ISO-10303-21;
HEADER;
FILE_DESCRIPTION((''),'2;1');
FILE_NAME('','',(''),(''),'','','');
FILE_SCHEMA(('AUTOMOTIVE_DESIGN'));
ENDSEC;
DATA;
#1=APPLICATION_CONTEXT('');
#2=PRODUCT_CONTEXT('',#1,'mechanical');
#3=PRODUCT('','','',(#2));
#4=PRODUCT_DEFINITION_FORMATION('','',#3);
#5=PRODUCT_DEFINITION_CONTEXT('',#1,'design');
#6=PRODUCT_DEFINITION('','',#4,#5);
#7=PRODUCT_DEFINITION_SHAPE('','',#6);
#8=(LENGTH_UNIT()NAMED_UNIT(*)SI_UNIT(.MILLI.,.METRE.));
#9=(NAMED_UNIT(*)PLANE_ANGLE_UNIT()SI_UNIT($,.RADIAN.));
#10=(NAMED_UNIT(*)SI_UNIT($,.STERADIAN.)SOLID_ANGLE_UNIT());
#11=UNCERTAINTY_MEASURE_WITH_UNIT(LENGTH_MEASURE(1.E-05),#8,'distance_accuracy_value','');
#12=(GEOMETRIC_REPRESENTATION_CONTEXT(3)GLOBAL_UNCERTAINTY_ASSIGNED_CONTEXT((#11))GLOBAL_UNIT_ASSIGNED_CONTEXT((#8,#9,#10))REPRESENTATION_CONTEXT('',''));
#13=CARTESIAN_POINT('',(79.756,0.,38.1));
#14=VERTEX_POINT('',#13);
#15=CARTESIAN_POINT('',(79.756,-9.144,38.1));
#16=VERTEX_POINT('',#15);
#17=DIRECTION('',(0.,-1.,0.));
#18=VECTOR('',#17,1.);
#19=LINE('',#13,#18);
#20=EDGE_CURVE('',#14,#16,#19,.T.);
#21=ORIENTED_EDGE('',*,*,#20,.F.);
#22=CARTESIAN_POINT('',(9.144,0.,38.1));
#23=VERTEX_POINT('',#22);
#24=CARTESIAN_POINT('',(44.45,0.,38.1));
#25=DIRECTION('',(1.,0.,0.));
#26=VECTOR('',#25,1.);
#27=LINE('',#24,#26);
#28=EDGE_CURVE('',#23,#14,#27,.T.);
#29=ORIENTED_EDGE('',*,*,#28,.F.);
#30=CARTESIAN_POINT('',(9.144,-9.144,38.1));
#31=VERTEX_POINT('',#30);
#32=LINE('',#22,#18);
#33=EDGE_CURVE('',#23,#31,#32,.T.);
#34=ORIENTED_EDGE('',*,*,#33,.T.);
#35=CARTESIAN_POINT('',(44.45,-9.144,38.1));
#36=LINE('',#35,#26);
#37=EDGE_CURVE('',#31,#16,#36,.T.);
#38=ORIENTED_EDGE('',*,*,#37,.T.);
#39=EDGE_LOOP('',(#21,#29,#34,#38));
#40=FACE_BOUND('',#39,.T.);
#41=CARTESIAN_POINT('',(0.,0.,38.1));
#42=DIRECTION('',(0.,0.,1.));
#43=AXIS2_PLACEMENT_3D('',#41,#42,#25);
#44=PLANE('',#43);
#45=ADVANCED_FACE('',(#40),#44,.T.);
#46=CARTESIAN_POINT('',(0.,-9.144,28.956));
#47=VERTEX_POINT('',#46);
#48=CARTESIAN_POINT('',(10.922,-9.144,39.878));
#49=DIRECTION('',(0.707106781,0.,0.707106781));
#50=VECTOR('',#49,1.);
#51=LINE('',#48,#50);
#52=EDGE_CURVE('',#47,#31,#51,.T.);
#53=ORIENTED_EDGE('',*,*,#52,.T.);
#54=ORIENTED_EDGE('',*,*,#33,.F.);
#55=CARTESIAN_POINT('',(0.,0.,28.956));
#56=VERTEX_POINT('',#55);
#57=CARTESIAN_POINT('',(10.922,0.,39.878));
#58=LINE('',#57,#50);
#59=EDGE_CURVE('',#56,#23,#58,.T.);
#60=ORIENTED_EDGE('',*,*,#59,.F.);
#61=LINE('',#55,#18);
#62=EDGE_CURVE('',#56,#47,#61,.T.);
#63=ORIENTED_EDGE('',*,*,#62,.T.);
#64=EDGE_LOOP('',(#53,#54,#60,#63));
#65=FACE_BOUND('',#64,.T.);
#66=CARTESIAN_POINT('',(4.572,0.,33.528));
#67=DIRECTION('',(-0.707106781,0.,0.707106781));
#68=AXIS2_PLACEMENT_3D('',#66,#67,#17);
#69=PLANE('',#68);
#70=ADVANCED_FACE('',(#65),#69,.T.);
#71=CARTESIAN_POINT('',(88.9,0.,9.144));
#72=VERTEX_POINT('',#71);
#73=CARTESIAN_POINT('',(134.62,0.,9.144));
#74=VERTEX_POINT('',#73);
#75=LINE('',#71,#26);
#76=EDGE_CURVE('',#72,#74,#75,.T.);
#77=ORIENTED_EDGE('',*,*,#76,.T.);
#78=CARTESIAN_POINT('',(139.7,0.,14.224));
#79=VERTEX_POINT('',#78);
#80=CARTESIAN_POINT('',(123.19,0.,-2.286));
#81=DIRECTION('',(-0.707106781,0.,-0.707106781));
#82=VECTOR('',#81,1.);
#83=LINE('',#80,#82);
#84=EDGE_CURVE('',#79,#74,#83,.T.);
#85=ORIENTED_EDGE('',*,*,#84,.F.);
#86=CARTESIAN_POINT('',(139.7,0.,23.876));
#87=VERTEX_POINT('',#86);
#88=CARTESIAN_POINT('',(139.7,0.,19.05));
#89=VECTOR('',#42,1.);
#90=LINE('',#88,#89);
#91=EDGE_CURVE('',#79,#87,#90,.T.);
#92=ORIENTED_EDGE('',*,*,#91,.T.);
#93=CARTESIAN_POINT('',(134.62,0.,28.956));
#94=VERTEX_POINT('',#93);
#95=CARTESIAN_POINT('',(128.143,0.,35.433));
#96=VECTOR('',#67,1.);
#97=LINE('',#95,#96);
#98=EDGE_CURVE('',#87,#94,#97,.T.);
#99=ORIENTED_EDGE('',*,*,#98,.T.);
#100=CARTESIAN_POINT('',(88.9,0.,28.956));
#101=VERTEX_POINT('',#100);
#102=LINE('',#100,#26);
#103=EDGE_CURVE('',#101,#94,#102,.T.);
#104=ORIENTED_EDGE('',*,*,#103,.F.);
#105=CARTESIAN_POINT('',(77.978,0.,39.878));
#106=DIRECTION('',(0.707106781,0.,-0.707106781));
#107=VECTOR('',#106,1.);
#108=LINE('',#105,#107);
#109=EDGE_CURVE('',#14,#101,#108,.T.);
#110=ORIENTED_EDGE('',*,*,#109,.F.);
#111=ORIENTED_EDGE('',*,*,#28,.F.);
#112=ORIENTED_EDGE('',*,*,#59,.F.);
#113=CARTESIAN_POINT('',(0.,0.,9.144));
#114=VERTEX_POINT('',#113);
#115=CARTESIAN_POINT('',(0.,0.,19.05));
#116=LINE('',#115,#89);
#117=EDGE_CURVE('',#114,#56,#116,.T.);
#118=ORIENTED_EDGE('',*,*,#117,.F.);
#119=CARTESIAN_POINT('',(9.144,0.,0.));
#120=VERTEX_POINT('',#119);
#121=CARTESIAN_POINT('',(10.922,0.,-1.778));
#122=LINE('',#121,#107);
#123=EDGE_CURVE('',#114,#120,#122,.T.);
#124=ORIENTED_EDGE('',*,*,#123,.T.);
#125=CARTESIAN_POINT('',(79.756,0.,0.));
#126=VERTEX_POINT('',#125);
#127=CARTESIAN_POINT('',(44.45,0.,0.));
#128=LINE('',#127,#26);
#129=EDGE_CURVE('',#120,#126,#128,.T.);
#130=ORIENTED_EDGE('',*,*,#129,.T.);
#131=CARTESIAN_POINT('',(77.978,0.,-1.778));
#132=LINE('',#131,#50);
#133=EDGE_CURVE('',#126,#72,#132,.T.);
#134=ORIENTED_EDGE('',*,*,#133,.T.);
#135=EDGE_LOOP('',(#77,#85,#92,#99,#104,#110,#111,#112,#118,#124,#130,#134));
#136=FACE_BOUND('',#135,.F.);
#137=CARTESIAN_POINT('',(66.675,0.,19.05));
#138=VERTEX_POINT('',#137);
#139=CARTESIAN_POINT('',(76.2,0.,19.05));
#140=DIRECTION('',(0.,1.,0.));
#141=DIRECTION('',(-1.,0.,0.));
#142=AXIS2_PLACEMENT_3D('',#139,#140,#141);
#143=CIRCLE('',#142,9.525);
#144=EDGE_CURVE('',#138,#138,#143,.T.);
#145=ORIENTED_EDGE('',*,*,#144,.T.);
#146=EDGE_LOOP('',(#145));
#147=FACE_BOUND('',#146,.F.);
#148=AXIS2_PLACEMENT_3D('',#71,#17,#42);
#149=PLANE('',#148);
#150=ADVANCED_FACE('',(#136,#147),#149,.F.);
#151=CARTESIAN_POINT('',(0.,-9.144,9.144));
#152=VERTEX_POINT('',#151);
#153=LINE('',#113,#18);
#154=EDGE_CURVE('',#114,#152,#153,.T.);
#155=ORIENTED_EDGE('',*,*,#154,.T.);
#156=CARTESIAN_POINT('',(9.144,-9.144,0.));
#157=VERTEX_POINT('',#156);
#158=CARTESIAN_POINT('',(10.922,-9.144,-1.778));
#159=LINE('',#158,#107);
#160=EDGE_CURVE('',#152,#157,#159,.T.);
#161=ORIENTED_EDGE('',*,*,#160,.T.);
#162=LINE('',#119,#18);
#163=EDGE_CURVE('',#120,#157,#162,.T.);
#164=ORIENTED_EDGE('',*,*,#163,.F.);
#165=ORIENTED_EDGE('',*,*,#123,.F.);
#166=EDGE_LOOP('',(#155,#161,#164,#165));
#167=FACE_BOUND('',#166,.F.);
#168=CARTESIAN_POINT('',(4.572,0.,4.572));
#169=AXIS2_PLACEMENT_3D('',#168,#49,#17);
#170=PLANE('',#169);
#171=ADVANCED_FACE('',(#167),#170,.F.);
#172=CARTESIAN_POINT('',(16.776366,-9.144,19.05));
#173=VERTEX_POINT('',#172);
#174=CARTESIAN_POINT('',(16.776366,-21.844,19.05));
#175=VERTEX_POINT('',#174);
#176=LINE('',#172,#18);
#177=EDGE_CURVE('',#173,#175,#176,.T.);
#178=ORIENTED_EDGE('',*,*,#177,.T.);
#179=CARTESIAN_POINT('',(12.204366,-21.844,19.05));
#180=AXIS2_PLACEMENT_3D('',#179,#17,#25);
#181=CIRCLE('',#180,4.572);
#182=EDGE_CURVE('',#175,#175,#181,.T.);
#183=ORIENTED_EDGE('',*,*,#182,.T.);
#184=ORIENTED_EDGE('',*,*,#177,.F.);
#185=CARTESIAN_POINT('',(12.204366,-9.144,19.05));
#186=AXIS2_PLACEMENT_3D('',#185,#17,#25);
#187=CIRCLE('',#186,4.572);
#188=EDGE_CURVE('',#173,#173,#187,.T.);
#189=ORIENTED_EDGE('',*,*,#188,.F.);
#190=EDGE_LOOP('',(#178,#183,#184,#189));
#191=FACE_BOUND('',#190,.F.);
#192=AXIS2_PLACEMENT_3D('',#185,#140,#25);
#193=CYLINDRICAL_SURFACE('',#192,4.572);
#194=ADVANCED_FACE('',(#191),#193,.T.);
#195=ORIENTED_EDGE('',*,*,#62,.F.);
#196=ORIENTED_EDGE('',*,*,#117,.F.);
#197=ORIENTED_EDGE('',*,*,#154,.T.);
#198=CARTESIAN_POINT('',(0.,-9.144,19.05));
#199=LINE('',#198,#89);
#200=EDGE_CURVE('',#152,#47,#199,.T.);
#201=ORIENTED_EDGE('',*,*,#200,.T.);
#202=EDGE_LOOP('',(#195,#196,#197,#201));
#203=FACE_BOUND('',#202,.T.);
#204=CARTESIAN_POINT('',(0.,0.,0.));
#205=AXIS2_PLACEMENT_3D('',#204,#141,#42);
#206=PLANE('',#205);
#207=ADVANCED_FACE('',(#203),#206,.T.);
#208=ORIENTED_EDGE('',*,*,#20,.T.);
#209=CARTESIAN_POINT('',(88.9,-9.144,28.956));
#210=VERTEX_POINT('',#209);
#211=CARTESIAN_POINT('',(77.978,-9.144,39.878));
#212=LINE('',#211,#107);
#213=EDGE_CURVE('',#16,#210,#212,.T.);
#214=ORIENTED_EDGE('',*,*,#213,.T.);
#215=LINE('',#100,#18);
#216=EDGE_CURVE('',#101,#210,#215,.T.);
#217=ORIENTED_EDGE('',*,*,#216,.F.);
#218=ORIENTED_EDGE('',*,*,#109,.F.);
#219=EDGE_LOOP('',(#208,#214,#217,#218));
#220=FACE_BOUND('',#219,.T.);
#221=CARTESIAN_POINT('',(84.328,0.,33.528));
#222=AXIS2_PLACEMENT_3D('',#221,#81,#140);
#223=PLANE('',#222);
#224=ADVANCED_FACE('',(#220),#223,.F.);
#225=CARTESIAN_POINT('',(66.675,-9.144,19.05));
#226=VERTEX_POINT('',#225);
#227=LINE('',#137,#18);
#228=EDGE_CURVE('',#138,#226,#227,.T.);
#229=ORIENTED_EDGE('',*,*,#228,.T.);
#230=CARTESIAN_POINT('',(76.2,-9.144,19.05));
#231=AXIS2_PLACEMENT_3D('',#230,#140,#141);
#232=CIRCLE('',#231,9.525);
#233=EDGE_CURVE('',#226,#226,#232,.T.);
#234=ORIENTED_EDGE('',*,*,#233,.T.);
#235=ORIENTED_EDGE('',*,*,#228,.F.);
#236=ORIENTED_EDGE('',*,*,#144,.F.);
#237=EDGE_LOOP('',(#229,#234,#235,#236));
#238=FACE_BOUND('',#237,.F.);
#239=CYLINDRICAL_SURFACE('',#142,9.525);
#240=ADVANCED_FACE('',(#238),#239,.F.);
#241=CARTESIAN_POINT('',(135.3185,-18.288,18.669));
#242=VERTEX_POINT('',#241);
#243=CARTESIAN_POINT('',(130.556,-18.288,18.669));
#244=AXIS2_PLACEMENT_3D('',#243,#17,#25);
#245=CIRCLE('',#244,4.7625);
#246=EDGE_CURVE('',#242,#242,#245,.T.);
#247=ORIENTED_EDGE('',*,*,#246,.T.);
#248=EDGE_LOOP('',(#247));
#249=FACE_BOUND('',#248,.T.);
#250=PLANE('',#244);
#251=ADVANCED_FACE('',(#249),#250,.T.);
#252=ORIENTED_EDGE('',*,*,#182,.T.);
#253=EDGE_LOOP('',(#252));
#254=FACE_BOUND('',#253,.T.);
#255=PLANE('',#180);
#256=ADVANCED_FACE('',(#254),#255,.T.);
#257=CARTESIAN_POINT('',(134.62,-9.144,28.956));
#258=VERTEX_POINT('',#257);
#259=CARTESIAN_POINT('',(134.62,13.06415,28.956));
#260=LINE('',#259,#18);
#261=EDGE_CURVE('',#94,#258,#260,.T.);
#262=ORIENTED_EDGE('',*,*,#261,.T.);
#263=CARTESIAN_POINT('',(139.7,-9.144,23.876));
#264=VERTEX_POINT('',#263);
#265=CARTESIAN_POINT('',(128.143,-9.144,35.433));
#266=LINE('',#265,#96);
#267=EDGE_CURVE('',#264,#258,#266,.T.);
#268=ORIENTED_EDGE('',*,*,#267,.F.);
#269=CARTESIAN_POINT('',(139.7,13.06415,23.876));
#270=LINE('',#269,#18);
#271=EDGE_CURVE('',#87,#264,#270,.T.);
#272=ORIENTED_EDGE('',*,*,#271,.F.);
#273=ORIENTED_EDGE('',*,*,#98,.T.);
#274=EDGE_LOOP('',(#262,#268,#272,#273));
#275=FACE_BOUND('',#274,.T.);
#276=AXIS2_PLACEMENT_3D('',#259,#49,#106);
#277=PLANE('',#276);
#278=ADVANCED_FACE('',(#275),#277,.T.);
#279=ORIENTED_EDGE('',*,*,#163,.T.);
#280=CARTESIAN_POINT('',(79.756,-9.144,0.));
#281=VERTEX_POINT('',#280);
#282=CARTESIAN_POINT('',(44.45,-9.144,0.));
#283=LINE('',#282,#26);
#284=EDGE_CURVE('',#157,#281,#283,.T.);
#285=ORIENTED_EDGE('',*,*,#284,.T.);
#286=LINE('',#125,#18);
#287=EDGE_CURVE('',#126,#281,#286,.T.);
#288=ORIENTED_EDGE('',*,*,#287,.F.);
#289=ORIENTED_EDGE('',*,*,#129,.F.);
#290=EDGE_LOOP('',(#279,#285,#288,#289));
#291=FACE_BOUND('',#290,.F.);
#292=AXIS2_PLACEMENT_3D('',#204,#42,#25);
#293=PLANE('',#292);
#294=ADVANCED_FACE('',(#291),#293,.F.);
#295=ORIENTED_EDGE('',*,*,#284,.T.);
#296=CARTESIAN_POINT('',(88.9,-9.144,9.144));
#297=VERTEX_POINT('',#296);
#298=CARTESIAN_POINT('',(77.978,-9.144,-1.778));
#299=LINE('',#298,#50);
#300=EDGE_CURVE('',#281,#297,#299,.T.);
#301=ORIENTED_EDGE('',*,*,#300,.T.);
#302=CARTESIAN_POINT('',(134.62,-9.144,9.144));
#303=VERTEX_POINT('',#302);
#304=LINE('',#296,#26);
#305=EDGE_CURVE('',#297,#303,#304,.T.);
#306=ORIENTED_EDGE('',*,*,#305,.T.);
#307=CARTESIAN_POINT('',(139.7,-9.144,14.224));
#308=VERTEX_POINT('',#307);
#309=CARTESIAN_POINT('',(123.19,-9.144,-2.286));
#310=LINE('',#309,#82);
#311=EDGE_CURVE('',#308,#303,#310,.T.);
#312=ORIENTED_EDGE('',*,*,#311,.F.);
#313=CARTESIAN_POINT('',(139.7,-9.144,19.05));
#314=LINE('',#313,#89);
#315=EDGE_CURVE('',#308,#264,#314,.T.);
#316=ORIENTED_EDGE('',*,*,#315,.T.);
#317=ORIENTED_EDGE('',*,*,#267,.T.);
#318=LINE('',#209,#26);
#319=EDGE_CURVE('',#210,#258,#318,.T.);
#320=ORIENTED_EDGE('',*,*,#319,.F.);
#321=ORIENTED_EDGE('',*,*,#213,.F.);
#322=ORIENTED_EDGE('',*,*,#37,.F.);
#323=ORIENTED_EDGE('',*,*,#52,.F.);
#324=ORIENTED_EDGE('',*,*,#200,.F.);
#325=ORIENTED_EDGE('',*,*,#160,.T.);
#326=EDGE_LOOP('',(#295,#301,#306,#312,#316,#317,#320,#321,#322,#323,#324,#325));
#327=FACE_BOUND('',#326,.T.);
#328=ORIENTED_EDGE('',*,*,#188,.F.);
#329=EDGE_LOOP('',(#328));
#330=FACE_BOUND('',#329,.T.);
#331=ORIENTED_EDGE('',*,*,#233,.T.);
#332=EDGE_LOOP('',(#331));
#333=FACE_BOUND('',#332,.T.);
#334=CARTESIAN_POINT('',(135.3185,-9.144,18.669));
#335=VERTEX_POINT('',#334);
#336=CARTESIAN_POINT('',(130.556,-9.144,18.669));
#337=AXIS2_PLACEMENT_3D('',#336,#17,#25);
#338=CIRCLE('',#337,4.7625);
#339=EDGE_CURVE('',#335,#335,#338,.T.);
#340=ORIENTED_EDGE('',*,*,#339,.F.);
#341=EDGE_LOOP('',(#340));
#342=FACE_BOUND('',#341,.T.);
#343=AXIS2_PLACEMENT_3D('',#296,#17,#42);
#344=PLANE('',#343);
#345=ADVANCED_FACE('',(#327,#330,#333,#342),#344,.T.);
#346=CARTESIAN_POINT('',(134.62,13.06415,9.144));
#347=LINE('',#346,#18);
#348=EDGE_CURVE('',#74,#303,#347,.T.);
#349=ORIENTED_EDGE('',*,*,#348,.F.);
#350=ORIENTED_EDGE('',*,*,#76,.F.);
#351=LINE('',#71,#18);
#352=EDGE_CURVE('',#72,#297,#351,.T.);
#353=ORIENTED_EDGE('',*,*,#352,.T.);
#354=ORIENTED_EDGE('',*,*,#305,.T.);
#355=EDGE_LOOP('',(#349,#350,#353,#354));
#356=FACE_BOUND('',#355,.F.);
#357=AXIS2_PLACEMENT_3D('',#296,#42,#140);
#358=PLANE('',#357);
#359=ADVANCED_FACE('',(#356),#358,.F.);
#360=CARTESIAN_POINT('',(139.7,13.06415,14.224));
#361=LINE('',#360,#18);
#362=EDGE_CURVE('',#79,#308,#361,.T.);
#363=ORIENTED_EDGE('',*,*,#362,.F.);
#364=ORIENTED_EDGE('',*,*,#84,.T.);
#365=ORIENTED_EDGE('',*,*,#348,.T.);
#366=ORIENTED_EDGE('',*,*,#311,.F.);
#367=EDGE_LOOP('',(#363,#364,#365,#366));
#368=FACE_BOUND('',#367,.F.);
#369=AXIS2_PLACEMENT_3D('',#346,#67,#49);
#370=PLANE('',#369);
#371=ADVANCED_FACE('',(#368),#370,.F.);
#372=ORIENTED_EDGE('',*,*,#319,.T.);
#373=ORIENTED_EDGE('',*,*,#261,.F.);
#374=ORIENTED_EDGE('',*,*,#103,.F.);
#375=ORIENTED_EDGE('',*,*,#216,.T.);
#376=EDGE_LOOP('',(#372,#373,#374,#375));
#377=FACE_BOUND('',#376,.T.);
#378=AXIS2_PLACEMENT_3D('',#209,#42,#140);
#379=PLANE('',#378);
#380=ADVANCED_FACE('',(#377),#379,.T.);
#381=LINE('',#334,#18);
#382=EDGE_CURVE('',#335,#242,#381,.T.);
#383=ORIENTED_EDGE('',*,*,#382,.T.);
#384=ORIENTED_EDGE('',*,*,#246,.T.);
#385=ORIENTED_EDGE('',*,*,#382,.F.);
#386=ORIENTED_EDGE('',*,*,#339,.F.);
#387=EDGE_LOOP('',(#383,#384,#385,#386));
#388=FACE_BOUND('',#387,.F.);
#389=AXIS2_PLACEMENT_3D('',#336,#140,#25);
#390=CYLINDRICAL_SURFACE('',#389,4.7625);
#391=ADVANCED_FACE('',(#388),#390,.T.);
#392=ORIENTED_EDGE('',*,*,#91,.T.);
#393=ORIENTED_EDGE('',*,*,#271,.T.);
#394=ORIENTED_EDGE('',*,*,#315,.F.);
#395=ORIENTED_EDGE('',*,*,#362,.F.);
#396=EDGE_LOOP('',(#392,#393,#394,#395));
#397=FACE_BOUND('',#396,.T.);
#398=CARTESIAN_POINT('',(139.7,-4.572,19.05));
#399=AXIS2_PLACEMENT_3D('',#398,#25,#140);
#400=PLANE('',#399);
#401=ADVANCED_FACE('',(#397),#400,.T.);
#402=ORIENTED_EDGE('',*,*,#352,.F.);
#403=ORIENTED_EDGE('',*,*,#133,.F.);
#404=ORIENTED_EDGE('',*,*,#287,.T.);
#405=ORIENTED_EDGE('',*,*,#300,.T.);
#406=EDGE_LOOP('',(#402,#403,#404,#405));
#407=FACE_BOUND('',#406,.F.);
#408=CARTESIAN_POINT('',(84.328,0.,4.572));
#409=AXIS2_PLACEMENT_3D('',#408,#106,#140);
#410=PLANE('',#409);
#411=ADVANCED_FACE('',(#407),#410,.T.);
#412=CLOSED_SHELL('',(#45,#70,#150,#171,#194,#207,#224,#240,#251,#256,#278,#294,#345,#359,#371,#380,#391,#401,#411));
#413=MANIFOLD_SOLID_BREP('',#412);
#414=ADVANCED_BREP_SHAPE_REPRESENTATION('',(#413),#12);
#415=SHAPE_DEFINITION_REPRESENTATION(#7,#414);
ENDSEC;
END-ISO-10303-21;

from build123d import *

# Parameters (mm, degrees)
F0_W        = 88.9
F0_H        = 38.1
F1_DEPTH    = 9.144
F2_R        = 4.572
F3_DEPTH    = 12.7
F4_R        = 9.525
F5_DEPTH    = 21.845
F6_SIZE     = 9.144
F7_W        = 9.144
F7_H        = 19.812
F8_DEPTH    = 50.8
F9_T1_DEPTH = 35.2722991577
F10_R       = 4.7625
F11_DEPTH   = 9.144


# Not quite as in the source:
# - a fillet or chamfer that OpenCascade refuses, or shapes differently, is made with other operations: its cross-section is extruded or revolved along the edge and cut away or added


with BuildPart() as f1:
    # F0 (on Front) → F1 (new body)
    with BuildSketch(Plane.XZ):
        with Locations((44.45, 19.05)):
            Rectangle(F0_W, F0_H)
    extrude(amount=F1_DEPTH)

    # F2 (on face) → F3 (join)
    with BuildSketch(Plane.XZ.offset(9.144)):
        with Locations((12.2043658048, 19.05)):
            Circle(F2_R)
    extrude(amount=F3_DEPTH)

    # F4 (on face) → F5 (cut, through all)
    with BuildSketch(Plane(origin=(0, 0, 0), x_dir=(-1, 0, 0), z_dir=(0, 1, 0))):
        with Locations((-76.2, 19.05)):
            Circle(F4_R)
    extrude(amount=-F5_DEPTH, mode=Mode.SUBTRACT)

    # F6
    f6_edges = [f1.edges().sort_by_distance(p)[0] for p in [
        (0, -4.572, 38.1),
        (88.9, -4.572, 38.1),
        (0, -4.572, 0),
        (88.9, -4.572, 0),
    ]]
    chamfer(f6_edges, length=F6_SIZE)

    # F7 (on face) → F8 (join)
    with BuildSketch(Plane.YZ.offset(88.9)):
        with Locations((-4.572, 19.05)):
            Rectangle(F7_W, F7_H)
    extrude(amount=F8_DEPTH)

    # F9: chamfer of 5.08 on 4 edges, made by hand

    # F9_s2 → F9_t1 (cut)
    with BuildSketch(Plane.XZ.offset(-13.0641495789)):
        Polygon((134.62, 28.956), (139.7, 23.876), (139.7, 28.956), align=None)
        Polygon((134.62, 9.144), (139.7, 14.224), (139.7, 9.144), align=None)
    extrude(amount=F9_T1_DEPTH, mode=Mode.SUBTRACT)

    # F10 (on face) → F11 (join)
    with BuildSketch(Plane.XZ.offset(9.144)):
        with Locations((130.556, 18.669)):
            Circle(F10_R)
    extrude(amount=F11_DEPTH)


solid = f1.part
